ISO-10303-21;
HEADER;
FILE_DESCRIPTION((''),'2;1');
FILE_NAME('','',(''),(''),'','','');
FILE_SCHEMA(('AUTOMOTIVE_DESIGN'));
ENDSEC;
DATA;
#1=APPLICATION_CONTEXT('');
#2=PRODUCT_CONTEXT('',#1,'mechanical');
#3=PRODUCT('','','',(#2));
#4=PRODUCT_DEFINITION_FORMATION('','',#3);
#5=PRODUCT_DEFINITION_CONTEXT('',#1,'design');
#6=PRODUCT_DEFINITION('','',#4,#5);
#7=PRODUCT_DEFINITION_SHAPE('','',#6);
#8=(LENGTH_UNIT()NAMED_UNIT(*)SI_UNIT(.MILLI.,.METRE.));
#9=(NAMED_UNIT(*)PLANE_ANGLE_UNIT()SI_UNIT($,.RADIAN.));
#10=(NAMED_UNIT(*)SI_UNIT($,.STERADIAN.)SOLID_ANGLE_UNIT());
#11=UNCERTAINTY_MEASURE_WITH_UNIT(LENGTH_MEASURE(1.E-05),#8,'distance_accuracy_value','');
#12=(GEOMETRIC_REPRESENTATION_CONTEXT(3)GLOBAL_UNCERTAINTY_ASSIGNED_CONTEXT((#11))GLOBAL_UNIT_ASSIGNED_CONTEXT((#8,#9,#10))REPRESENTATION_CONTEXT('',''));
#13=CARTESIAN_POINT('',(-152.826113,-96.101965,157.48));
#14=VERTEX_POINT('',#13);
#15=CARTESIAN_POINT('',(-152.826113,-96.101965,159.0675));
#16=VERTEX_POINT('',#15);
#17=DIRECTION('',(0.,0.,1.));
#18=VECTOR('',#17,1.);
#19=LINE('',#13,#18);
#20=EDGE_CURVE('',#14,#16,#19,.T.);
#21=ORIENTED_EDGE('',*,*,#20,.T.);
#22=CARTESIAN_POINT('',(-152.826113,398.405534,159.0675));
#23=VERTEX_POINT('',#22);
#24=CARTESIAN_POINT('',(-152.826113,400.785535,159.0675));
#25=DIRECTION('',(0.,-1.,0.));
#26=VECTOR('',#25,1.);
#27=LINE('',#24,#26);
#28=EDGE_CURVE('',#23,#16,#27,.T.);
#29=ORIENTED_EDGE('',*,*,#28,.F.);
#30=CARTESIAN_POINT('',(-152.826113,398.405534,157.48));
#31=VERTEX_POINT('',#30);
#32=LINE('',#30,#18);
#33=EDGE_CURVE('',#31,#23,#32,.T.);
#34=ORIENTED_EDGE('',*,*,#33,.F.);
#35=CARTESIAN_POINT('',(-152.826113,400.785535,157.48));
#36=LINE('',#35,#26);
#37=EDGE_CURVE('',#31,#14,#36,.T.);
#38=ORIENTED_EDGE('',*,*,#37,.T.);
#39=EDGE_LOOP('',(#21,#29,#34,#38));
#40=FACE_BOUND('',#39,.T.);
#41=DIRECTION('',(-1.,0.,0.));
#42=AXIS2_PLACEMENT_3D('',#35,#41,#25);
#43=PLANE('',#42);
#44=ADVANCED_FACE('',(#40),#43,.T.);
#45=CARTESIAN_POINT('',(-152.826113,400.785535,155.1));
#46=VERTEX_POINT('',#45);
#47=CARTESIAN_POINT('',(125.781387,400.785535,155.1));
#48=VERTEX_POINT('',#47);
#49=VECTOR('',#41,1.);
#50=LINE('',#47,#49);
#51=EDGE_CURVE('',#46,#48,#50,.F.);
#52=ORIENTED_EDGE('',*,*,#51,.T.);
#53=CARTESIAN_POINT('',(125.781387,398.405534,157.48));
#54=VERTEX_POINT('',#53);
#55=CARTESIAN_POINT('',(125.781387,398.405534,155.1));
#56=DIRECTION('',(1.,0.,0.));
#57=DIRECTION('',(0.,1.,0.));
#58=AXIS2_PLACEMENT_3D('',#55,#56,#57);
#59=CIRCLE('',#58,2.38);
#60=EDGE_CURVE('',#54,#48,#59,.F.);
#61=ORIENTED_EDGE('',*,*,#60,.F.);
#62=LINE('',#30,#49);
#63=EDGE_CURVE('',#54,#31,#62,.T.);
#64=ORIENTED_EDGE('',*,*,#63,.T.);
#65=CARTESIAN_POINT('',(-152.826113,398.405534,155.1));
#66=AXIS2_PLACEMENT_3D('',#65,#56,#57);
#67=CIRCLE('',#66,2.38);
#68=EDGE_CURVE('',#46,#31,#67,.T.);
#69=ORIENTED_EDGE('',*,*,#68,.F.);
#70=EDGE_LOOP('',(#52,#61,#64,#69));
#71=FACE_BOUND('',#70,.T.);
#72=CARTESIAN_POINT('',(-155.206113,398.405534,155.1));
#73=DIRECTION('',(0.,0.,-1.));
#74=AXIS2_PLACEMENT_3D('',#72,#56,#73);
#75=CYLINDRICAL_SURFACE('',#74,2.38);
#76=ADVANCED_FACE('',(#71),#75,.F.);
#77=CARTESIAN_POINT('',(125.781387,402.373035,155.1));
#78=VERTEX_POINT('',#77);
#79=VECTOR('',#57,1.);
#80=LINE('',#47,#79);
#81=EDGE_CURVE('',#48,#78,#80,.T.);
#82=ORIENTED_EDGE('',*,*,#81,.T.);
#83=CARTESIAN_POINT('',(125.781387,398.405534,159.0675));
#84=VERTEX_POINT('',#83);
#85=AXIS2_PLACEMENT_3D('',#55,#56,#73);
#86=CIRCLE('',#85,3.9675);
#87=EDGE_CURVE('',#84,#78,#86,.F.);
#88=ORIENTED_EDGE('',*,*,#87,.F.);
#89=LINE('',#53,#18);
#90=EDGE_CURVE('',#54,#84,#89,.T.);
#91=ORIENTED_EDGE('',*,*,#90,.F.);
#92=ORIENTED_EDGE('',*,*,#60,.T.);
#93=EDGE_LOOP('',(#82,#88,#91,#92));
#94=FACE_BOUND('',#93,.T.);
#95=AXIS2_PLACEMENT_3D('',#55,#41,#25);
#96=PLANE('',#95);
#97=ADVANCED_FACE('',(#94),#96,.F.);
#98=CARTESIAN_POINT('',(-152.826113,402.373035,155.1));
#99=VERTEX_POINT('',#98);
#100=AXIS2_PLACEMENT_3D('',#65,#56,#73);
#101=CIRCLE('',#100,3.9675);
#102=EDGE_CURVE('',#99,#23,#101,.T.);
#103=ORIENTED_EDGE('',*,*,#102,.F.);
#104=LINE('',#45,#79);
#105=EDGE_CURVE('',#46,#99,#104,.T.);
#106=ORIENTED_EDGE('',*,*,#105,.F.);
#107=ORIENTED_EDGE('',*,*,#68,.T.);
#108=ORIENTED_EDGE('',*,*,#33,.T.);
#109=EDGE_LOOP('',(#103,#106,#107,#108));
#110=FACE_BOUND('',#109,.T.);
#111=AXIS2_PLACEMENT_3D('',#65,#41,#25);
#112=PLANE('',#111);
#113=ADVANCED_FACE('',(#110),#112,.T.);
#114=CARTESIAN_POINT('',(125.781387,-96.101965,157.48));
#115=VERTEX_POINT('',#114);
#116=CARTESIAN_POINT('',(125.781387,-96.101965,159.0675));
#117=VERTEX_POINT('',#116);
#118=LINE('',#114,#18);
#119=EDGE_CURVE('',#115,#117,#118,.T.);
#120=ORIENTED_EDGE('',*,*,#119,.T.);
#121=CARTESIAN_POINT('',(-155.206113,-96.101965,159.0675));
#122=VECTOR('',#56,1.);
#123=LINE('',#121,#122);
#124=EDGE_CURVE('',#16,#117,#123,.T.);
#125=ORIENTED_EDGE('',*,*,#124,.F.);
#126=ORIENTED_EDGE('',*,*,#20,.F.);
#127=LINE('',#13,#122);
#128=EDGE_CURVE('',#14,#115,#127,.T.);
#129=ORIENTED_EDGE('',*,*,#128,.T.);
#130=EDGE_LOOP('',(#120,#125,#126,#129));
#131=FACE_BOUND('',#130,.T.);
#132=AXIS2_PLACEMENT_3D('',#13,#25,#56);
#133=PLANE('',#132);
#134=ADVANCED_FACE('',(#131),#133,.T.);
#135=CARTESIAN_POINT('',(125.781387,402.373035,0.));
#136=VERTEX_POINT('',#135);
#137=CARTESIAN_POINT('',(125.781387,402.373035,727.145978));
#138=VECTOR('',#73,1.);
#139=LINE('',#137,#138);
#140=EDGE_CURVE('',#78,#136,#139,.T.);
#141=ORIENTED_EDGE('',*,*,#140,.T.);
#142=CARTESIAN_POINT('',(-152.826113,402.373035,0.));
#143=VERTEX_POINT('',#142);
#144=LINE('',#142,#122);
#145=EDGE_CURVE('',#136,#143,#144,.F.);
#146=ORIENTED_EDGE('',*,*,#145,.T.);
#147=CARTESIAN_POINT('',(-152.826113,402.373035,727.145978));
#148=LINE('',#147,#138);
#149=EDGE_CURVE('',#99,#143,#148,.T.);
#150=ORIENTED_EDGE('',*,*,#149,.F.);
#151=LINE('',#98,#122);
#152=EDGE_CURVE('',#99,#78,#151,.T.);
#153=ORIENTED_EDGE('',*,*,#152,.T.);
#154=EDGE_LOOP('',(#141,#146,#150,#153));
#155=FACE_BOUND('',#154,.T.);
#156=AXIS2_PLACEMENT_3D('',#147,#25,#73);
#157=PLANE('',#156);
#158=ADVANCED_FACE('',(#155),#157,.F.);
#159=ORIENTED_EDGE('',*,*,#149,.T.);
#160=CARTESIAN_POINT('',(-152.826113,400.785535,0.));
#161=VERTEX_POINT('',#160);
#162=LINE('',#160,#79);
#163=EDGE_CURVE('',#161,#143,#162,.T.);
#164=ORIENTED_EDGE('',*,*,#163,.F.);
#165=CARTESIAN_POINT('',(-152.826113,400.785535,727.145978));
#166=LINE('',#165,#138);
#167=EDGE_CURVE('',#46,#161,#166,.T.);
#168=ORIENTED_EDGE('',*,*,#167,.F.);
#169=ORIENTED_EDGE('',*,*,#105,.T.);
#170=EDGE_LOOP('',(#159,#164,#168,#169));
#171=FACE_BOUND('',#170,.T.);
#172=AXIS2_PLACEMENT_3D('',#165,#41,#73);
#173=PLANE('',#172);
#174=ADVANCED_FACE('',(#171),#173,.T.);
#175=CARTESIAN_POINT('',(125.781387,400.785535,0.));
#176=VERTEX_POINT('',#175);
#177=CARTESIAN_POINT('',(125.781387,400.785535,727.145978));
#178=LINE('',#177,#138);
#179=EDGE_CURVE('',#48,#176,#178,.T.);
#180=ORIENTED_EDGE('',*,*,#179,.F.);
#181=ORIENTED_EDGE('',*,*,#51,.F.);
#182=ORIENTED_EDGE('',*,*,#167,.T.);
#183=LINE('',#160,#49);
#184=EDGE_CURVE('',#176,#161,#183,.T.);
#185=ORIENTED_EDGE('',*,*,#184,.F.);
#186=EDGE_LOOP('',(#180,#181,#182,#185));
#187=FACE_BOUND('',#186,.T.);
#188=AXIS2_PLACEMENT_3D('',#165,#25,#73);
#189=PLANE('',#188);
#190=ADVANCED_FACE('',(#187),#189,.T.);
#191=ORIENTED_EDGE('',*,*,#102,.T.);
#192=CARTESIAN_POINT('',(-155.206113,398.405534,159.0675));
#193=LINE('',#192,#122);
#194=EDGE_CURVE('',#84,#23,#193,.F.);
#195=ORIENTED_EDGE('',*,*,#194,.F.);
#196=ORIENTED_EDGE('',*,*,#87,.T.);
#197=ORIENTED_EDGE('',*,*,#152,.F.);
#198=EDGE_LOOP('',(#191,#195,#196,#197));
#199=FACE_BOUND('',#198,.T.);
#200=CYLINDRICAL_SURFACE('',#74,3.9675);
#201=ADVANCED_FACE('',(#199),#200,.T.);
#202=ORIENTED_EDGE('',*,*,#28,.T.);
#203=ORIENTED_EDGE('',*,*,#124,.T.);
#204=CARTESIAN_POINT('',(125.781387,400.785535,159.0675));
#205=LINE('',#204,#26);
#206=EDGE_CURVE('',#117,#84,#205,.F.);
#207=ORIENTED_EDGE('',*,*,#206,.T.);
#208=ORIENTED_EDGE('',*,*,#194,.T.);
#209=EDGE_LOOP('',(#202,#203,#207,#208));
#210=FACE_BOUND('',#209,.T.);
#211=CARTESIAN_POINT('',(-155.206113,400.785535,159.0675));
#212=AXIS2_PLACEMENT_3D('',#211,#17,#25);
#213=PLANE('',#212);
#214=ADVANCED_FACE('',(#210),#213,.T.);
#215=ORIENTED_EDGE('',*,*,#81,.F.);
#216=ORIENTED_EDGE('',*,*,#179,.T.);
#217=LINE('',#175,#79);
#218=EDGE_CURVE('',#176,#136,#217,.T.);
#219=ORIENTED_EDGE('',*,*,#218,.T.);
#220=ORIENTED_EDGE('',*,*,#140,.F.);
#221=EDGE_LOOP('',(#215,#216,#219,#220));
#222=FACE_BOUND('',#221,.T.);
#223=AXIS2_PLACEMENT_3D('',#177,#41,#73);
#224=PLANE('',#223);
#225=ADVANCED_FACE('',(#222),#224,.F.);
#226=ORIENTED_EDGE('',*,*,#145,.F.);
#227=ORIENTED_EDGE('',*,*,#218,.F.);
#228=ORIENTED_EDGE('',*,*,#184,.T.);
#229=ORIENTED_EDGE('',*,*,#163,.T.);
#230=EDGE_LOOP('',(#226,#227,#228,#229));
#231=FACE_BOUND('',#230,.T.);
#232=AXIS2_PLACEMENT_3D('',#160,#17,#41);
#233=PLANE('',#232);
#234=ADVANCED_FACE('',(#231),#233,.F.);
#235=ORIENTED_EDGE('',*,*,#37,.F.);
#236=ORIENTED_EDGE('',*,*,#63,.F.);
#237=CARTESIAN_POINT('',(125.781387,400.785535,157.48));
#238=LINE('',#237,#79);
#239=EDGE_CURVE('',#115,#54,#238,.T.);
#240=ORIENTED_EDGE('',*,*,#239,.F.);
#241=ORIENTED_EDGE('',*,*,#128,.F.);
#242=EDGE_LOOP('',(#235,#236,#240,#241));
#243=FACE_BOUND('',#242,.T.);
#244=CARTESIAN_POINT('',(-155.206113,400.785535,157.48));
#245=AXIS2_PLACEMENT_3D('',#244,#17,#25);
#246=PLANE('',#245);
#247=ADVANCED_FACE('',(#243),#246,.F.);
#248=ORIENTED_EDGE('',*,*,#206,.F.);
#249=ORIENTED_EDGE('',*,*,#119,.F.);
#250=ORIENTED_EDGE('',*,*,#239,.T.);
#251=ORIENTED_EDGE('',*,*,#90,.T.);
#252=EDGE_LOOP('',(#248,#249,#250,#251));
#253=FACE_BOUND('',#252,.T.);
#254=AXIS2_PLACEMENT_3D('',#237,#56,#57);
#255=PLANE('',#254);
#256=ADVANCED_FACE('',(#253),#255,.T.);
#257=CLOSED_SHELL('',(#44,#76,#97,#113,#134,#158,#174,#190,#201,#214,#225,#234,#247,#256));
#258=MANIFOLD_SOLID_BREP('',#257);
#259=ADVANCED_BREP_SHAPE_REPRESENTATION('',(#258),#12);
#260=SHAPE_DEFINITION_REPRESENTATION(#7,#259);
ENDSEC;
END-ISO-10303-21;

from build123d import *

# Parameters (mm, degrees)
SKETCH1_W              = 278.607499934
SKETCH1_H              = 496.8875
BOSS_EXTRUDE1_DEPTH    = 157.48
CONVERT_SOLID1_START   = -152.826113143
CONVERT_SOLID1_DEPTH   = 278.607499934
CONVERT_SOLID1_2_DEPTH = 278.607499934


# Read off the part's stored shape, not the designer's step: Convert-Solid1
with BuildPart() as part:
    # Sketch1 → Boss-Extrude1 (new body)
    with BuildSketch(Plane.XY):
        with Locations((-13.522363176, 152.341784507)):
            Rectangle(SKETCH1_W, SKETCH1_H)
    extrude(amount=BOSS_EXTRUDE1_DEPTH)

    # Convert-Solid1 outline → Convert-Solid1 (cut)
    with BuildSketch(Plane.YZ.offset(CONVERT_SOLID1_START)):
        with BuildLine():
            Line((398.405534441, 157.48), (-96.101965493, 157.48))
            Line((-96.101965493, 157.48), (-96.101965493, 0))
            Line((-96.101965493, 0), (400.785534507, 0))
            Line((400.785534507, 0), (400.785534507, 155.099999934))
            ThreePointArc((400.785534507, 155.099999934), (400.088448627, 156.78291412), (398.405534441, 157.48))
        make_face()
    extrude(amount=CONVERT_SOLID1_DEPTH, mode=Mode.SUBTRACT)

    # Convert-Solid1 2 outline → Convert-Solid1 2 (add)
    with BuildSketch(Plane.YZ.offset(CONVERT_SOLID1_START)):
        with BuildLine():
            Line((398.405534441, 159.0675), (-96.101965493, 159.0675))
            Line((-96.101965493, 159.0675), (-96.101965493, 157.48))
            Line((-96.101965493, 157.48), (400.785534507, 157.48))
            Line((400.785534507, 157.48), (400.785534507, 0))
            Line((400.785534507, 0), (402.373034507, 0))
            Line((402.373034507, 0), (402.373034507, 155.099999934))
            ThreePointArc((402.373034507, 155.099999934), (401.210980642, 157.905446136), (398.405534441, 159.0675))
        make_face()
    extrude(amount=CONVERT_SOLID1_2_DEPTH)


solid = part.part
